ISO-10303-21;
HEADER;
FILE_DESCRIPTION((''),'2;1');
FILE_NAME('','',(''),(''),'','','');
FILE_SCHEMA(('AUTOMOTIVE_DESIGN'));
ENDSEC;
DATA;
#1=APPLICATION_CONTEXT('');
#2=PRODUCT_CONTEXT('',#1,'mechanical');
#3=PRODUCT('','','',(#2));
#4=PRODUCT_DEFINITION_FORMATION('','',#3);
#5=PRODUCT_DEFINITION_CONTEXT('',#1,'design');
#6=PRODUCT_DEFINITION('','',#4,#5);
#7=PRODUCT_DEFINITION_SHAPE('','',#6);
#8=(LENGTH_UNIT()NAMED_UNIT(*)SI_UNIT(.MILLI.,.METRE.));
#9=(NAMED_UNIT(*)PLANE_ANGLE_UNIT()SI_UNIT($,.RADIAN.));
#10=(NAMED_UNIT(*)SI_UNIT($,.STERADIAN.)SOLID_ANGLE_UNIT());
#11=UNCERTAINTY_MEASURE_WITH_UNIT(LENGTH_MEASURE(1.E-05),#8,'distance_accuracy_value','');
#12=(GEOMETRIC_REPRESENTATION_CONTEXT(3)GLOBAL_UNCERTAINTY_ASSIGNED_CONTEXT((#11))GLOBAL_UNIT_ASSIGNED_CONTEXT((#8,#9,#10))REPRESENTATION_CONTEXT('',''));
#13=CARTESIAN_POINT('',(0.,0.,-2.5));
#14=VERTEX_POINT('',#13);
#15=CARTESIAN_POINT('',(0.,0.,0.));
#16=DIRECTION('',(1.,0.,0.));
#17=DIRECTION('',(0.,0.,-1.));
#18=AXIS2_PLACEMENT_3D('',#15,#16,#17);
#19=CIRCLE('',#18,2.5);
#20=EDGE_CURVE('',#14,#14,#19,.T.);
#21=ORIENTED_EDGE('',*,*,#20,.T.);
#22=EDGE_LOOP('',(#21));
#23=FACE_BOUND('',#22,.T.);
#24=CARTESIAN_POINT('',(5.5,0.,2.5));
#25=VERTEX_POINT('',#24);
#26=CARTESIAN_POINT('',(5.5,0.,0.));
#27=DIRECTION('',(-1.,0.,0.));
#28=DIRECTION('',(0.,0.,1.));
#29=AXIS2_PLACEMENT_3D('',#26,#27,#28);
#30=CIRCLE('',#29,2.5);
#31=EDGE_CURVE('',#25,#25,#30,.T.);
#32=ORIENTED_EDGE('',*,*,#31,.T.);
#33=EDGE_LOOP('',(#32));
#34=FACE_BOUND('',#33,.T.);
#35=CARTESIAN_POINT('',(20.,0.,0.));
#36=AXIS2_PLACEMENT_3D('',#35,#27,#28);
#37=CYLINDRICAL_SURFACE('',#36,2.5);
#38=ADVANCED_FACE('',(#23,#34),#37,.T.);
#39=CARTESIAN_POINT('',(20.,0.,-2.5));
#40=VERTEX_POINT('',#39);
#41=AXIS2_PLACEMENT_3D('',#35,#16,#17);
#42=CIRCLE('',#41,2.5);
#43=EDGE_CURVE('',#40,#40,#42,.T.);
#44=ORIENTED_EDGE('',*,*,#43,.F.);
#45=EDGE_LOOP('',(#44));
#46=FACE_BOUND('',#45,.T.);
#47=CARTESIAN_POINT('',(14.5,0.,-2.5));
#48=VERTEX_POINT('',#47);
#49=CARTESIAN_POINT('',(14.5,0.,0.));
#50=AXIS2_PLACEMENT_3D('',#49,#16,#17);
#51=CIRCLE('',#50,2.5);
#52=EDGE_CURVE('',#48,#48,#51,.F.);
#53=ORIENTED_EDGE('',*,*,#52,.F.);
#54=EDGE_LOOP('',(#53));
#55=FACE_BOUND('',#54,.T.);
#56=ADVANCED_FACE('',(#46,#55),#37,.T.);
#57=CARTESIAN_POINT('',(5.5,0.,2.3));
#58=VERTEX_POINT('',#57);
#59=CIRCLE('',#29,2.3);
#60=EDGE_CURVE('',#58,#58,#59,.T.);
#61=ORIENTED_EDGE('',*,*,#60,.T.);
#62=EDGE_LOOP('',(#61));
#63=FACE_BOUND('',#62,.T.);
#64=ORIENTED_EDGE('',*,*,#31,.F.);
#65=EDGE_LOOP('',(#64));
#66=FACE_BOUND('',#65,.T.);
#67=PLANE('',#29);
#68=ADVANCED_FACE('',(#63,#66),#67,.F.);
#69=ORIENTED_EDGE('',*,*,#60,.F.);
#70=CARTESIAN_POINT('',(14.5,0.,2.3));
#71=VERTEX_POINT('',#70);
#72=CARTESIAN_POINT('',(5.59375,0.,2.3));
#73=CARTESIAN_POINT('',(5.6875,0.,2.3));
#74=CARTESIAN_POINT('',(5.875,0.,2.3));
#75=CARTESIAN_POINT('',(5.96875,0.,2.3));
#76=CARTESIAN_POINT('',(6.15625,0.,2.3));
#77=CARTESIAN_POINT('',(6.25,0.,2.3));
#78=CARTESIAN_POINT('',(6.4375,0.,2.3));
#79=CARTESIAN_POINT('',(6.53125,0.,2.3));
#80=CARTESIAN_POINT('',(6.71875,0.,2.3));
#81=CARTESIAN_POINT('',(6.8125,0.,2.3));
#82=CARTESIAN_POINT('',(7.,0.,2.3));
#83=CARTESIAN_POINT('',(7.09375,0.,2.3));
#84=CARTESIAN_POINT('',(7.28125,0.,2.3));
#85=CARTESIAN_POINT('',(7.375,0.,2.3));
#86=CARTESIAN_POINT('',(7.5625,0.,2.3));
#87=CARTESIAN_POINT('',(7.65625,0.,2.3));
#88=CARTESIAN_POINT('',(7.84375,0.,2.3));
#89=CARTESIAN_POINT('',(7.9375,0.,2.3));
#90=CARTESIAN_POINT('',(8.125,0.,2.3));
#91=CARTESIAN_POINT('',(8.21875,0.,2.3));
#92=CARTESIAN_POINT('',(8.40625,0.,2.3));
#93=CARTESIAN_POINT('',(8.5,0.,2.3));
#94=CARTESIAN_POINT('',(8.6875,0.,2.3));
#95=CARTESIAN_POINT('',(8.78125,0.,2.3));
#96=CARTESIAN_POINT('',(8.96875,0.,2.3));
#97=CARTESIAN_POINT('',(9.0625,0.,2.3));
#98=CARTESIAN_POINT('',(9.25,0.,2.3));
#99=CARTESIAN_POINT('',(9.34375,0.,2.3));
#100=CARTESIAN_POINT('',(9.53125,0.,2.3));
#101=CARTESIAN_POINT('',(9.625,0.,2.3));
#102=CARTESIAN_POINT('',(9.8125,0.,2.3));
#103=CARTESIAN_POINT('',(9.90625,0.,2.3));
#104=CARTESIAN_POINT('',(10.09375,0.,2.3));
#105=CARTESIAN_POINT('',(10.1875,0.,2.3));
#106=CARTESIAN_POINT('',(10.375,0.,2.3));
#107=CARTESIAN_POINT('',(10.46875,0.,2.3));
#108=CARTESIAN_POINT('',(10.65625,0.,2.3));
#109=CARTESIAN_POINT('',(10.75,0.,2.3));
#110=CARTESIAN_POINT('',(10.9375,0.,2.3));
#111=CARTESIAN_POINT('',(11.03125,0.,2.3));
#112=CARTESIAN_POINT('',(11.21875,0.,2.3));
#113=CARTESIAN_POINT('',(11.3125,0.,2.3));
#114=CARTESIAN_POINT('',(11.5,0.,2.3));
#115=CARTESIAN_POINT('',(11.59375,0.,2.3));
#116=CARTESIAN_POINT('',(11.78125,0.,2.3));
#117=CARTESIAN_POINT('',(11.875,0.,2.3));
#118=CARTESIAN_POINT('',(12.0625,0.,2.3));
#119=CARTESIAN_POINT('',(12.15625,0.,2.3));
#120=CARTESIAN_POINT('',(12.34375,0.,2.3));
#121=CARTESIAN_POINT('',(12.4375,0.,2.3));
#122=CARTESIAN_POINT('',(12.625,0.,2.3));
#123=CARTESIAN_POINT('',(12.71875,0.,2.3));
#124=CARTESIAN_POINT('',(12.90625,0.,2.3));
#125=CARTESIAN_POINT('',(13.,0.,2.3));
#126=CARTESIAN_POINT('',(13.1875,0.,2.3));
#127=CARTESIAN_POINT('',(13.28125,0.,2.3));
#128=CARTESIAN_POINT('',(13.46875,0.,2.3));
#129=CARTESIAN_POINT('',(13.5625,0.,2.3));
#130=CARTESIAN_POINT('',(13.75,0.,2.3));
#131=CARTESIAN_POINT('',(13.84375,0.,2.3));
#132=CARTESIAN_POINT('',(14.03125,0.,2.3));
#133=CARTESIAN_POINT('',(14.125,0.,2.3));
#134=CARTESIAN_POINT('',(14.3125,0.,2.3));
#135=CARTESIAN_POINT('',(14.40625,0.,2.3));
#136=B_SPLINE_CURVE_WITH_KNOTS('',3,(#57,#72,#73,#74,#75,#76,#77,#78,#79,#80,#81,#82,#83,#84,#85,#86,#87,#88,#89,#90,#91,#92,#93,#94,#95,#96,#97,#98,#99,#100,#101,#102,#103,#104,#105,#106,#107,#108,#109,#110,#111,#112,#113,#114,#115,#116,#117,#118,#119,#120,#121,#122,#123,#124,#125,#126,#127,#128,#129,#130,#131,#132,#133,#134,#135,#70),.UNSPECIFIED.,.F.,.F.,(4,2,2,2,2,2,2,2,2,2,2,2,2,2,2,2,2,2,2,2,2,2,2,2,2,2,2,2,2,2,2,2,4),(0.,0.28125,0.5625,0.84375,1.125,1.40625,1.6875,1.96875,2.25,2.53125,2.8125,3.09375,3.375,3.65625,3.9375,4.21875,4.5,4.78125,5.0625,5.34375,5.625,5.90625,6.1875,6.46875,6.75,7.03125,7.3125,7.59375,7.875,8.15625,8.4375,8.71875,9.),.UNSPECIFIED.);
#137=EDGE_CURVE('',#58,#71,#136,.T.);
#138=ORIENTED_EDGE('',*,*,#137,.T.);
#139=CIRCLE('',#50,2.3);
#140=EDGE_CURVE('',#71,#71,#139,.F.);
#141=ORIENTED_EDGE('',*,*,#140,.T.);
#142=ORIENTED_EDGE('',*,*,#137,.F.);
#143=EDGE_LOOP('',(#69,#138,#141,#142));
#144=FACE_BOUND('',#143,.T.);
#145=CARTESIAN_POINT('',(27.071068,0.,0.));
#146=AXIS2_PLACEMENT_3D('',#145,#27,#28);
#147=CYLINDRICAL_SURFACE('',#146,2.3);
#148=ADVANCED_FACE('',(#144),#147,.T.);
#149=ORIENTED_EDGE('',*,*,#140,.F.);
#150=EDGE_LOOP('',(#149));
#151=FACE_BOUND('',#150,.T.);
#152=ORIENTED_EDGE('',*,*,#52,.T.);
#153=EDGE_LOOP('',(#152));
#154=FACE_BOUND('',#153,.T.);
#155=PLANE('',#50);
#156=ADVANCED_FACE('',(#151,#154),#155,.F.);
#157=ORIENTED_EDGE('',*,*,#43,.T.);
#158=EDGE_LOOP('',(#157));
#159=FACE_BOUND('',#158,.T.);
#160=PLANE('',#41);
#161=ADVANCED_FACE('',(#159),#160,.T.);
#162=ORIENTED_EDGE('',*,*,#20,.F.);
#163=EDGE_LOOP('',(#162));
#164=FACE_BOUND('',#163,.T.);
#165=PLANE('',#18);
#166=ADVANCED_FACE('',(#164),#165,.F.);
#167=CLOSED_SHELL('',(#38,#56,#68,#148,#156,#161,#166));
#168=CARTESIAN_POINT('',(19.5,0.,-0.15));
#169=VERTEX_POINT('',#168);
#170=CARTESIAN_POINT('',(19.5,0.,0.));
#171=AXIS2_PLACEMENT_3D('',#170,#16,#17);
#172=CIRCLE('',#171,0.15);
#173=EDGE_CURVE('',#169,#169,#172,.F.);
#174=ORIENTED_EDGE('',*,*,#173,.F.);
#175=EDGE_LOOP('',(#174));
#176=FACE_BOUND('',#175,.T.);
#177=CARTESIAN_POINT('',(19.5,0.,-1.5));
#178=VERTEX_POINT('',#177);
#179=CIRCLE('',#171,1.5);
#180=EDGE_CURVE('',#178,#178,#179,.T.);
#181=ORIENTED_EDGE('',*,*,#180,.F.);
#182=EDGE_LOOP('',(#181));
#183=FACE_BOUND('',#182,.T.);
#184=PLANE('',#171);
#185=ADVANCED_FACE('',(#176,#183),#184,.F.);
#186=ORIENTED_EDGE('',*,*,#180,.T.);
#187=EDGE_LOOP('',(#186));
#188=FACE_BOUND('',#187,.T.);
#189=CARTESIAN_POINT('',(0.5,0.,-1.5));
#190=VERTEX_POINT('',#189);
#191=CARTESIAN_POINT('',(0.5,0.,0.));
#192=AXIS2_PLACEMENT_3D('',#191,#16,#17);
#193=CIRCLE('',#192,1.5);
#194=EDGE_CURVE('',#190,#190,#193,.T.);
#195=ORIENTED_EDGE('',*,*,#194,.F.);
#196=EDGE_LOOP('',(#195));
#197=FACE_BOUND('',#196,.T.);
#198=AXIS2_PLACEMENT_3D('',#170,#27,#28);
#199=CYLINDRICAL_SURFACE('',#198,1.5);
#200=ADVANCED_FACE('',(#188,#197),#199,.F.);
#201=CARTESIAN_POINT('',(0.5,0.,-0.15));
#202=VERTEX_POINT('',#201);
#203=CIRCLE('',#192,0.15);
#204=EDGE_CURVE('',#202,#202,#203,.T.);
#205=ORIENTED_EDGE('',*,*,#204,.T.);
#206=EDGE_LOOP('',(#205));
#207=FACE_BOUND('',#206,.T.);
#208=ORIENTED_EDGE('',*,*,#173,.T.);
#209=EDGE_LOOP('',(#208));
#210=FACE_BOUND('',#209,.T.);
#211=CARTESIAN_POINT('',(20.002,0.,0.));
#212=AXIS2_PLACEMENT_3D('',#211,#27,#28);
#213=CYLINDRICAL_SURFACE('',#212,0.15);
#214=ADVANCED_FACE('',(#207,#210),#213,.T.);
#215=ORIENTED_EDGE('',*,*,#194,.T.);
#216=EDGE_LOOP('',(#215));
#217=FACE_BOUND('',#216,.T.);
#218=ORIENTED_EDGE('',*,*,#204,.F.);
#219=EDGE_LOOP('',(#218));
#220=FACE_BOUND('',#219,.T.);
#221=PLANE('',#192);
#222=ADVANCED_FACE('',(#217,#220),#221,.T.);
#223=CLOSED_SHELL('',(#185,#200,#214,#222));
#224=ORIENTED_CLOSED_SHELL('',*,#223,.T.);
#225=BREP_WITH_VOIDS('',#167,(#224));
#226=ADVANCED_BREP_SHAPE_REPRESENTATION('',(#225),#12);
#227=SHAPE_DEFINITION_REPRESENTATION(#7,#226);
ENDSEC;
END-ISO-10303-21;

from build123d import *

# Parameters (mm, degrees)
CUT_EXTRUDE1_START  = -14.5
SKETCH2_R           = 2.5
SKETCH2_R_2         = 2.3
CUT_EXTRUDE1_DEPTH  = 9
BOSS_EXTRUDE2_REACH = 21.818
SKETCH3_R           = 0.15


# Read off the part's stored shape, not the designer's step: Extrude-Thin1
with BuildPart() as part:
    # Extrude-Thin1 outline → Extrude-Thin1 (revolve)
    with BuildSketch(Plane.YX):
        Polygon((2.5, 20), (0, 20), (0, 19.5), (1.5, 19.5), (1.5, 0.5), (0, 0.5), (0, 0), (2.5, 0), align=None)
    revolve(axis=Axis((0, 0, 0), (1, 0, 0)))

    # Sketch2 → Cut-Extrude1 (cut)
    with BuildSketch(Plane.ZY.offset(CUT_EXTRUDE1_START)):
        Circle(SKETCH2_R)
        Circle(SKETCH2_R_2, mode=Mode.SUBTRACT)
    extrude(amount=CUT_EXTRUDE1_DEPTH, mode=Mode.SUBTRACT)

    # Sketch3 → Boss-Extrude2 (add, up to next)
    with BuildSketch(Plane(origin=(0.5, 0, 0), x_dir=(0, 0, -1), z_dir=(1, 0, 0)), mode=Mode.PRIVATE) as boss_extrude2_sk1:
        Circle(SKETCH3_R)
    boss_extrude2_tool1 = extrude(boss_extrude2_sk1.sketch, amount=BOSS_EXTRUDE2_REACH, mode=Mode.PRIVATE) - part.part
    add(boss_extrude2_tool1.solids().sort_by_distance((0.5, 0, 0))[0])


solid = part.part
